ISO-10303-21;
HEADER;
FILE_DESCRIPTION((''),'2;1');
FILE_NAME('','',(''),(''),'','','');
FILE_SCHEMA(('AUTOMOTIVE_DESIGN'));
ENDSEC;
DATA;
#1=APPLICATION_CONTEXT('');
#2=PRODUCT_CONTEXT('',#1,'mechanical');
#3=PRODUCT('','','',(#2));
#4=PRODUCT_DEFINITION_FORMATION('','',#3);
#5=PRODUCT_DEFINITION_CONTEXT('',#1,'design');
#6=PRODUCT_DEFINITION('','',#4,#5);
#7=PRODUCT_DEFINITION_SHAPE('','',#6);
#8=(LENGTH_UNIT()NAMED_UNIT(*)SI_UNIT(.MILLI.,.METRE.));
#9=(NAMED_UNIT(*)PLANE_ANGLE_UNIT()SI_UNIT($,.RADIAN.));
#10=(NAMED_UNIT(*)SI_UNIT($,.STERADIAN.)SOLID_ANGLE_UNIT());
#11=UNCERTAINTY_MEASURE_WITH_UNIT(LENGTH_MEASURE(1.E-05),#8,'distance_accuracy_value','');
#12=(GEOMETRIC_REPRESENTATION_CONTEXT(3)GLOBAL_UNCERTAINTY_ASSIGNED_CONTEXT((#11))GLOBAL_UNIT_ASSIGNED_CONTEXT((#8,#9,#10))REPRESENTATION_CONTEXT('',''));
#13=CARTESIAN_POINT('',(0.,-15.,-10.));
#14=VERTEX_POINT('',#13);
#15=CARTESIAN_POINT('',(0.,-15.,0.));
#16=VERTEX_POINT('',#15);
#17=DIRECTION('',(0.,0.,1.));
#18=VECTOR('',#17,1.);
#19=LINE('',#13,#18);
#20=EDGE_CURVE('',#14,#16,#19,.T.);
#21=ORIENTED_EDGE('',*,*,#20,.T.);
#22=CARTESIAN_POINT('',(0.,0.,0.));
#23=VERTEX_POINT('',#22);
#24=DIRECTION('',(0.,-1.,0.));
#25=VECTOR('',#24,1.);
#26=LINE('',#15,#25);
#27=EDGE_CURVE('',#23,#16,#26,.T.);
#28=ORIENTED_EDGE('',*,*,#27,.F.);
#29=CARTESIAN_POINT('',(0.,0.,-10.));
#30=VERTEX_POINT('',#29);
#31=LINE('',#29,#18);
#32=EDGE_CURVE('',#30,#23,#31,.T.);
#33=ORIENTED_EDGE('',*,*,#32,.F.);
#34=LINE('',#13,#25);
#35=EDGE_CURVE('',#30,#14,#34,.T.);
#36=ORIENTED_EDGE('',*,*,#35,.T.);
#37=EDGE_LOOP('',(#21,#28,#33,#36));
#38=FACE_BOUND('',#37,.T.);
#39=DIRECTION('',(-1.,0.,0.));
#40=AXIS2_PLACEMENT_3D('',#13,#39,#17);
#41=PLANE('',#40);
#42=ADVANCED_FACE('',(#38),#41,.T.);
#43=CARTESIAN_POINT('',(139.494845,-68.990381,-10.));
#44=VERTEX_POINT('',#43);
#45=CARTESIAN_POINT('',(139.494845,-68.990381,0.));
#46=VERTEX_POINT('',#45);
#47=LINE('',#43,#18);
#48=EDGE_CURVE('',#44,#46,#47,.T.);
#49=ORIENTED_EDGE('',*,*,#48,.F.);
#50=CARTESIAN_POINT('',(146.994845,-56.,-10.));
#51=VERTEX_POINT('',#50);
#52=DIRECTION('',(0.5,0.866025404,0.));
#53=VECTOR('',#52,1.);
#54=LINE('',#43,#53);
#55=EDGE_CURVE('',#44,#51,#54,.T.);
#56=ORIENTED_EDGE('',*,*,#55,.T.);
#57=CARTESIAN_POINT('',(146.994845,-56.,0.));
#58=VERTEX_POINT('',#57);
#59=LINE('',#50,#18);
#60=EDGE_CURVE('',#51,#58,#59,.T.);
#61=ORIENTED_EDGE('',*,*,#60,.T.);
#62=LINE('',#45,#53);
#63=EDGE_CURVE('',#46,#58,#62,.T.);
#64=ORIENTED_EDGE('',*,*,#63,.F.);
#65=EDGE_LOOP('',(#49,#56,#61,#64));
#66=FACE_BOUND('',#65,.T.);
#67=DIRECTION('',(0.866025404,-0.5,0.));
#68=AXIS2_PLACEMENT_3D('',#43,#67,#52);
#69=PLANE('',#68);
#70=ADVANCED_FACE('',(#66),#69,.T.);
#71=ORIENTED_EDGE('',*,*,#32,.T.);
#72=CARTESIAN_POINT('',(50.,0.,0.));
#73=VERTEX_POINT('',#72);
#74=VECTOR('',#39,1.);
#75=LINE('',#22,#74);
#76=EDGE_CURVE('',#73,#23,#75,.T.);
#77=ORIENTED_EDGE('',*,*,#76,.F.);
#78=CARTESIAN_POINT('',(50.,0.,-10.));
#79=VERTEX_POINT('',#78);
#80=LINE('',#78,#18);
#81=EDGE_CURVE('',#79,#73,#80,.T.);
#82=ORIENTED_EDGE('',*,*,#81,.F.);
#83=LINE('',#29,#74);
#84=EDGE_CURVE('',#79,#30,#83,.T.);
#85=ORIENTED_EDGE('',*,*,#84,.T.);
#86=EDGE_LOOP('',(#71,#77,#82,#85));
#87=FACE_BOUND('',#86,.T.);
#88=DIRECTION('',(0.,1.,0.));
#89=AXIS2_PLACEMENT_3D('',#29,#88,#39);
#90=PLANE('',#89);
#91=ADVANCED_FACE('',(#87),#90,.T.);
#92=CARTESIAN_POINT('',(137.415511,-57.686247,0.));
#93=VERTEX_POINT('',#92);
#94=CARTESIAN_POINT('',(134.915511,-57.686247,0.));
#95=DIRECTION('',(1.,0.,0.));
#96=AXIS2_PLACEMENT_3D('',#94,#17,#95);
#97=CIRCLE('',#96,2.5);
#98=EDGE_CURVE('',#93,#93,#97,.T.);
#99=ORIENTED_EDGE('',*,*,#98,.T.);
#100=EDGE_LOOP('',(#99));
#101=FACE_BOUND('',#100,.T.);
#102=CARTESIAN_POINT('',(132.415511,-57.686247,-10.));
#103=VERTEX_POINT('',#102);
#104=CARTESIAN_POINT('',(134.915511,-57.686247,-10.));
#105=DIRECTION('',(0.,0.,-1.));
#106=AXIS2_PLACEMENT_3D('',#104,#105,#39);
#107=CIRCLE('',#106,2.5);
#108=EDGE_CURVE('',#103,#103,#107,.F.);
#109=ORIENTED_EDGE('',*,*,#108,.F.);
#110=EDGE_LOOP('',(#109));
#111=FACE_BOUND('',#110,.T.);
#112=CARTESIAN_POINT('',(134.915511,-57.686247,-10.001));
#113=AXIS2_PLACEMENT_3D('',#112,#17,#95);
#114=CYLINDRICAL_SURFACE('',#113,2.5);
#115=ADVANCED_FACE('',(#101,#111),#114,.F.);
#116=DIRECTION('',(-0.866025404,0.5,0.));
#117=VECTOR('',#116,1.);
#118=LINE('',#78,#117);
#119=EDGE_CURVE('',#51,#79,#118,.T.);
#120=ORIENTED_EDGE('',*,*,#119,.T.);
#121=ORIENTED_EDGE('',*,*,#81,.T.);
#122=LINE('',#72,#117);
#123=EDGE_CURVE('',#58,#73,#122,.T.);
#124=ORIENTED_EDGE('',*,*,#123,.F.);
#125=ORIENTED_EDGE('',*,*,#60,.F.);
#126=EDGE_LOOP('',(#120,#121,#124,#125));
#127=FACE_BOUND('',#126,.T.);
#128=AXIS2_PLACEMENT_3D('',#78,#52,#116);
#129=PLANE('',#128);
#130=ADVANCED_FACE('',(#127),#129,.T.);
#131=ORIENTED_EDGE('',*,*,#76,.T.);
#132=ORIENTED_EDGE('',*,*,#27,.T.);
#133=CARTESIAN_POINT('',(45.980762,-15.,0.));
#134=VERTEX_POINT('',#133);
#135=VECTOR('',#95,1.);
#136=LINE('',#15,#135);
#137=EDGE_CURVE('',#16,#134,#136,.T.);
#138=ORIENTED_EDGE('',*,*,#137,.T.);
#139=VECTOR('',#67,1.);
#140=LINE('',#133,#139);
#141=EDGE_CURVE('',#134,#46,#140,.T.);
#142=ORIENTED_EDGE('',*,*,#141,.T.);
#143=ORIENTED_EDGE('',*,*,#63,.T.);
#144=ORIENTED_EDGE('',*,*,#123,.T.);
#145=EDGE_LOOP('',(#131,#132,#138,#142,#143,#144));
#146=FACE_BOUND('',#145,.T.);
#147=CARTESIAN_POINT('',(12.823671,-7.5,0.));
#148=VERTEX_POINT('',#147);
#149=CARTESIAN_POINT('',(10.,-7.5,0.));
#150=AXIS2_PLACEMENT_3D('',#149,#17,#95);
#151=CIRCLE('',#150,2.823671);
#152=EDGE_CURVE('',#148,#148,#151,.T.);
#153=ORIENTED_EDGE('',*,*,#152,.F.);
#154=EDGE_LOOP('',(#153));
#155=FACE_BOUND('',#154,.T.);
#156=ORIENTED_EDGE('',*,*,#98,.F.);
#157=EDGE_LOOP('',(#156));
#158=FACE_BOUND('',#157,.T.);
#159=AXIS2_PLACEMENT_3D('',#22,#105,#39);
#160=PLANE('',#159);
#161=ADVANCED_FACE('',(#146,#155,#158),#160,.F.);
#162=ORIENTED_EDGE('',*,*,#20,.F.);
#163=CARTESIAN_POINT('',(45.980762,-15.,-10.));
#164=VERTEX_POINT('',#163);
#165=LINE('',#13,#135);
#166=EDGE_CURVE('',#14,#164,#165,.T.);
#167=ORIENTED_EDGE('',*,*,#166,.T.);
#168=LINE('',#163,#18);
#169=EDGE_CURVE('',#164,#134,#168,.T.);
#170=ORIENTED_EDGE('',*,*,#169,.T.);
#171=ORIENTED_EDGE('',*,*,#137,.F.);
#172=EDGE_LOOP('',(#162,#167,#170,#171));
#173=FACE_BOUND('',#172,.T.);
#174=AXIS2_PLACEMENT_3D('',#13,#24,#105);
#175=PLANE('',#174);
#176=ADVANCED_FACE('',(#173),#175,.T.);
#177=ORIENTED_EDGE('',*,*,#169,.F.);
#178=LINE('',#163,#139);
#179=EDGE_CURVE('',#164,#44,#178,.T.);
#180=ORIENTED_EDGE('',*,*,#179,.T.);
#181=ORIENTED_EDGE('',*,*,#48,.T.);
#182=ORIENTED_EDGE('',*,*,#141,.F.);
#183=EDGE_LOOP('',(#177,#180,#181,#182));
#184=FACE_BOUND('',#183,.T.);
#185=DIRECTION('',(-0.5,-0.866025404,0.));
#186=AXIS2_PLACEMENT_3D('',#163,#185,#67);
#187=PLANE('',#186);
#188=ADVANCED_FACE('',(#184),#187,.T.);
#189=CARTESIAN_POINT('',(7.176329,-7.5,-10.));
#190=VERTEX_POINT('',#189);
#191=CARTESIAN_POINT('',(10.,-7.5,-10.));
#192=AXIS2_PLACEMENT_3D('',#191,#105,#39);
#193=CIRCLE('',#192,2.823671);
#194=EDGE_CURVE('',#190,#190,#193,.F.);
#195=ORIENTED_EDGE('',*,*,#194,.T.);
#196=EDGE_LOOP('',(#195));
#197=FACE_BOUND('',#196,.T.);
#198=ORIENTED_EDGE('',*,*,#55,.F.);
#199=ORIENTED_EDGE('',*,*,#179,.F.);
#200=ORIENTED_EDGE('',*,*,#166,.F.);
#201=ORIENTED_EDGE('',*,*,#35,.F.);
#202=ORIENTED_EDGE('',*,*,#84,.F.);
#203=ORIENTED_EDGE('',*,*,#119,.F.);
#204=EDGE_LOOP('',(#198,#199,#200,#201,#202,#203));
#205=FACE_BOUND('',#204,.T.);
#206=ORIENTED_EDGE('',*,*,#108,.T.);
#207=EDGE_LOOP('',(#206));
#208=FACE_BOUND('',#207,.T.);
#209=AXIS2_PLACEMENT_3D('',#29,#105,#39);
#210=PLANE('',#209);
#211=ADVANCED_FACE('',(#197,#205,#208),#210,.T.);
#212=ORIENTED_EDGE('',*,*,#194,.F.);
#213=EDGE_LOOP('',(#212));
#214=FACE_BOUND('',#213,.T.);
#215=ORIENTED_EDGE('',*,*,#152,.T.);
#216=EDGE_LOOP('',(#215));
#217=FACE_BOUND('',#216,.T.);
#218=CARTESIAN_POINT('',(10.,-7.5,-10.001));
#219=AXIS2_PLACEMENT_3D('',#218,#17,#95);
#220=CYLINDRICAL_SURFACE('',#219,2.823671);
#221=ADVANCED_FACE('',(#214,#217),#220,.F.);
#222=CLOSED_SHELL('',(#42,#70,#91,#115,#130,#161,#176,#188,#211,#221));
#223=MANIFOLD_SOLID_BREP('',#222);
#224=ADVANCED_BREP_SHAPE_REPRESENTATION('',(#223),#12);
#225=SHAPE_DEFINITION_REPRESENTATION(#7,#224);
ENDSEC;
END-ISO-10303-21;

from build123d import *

# Parameters (mm, degrees)
BASE_FLANGE1_START = -10
BASE_FLANGE1_DEPTH = 10
CUT_EXTRUDE1_REACH = 164.687
SKETCH6_R          = 2.823671173
SKETCH6_R_2        = 2.5


# Read off the part's stored shape, not the designer's step: Base-Flange1
with BuildPart() as part:
    # Base-Flange1 outline → Base-Flange1 (new body)
    with BuildSketch(Plane.XY.offset(BASE_FLANGE1_START)):
        Polygon((50, 0), (0, 0), (0, -15), (45.980762114, -15), (139.494845224, -68.990381057), (146.994845224, -56), align=None)
    extrude(amount=BASE_FLANGE1_DEPTH)

    # Sketch6 → Cut-Extrude1 (cut, up to next)
    with BuildSketch(Plane.XY, mode=Mode.PRIVATE) as cut_extrude1_sk1:
        with Locations((10, -7.5)):
            Circle(SKETCH6_R)
    cut_extrude1_tool1 = extrude(cut_extrude1_sk1.sketch, amount=-CUT_EXTRUDE1_REACH, mode=Mode.PRIVATE) & part.part
    # Sketch6 → Cut-Extrude1 (cut, up to next)
    with BuildSketch(Plane.XY, mode=Mode.PRIVATE) as cut_extrude1_sk2:
        with Locations((134.915511346, -57.686247372)):
            Circle(SKETCH6_R_2)
    cut_extrude1_tool2 = extrude(cut_extrude1_sk2.sketch, amount=-CUT_EXTRUDE1_REACH, mode=Mode.PRIVATE) & part.part
    add(cut_extrude1_tool1.solids().sort_by_distance((10, -7.5, 0))[0], mode=Mode.SUBTRACT)
    add(cut_extrude1_tool2.solids().sort_by_distance((134.915511, -57.686247, 0))[0], mode=Mode.SUBTRACT)


solid = part.part
